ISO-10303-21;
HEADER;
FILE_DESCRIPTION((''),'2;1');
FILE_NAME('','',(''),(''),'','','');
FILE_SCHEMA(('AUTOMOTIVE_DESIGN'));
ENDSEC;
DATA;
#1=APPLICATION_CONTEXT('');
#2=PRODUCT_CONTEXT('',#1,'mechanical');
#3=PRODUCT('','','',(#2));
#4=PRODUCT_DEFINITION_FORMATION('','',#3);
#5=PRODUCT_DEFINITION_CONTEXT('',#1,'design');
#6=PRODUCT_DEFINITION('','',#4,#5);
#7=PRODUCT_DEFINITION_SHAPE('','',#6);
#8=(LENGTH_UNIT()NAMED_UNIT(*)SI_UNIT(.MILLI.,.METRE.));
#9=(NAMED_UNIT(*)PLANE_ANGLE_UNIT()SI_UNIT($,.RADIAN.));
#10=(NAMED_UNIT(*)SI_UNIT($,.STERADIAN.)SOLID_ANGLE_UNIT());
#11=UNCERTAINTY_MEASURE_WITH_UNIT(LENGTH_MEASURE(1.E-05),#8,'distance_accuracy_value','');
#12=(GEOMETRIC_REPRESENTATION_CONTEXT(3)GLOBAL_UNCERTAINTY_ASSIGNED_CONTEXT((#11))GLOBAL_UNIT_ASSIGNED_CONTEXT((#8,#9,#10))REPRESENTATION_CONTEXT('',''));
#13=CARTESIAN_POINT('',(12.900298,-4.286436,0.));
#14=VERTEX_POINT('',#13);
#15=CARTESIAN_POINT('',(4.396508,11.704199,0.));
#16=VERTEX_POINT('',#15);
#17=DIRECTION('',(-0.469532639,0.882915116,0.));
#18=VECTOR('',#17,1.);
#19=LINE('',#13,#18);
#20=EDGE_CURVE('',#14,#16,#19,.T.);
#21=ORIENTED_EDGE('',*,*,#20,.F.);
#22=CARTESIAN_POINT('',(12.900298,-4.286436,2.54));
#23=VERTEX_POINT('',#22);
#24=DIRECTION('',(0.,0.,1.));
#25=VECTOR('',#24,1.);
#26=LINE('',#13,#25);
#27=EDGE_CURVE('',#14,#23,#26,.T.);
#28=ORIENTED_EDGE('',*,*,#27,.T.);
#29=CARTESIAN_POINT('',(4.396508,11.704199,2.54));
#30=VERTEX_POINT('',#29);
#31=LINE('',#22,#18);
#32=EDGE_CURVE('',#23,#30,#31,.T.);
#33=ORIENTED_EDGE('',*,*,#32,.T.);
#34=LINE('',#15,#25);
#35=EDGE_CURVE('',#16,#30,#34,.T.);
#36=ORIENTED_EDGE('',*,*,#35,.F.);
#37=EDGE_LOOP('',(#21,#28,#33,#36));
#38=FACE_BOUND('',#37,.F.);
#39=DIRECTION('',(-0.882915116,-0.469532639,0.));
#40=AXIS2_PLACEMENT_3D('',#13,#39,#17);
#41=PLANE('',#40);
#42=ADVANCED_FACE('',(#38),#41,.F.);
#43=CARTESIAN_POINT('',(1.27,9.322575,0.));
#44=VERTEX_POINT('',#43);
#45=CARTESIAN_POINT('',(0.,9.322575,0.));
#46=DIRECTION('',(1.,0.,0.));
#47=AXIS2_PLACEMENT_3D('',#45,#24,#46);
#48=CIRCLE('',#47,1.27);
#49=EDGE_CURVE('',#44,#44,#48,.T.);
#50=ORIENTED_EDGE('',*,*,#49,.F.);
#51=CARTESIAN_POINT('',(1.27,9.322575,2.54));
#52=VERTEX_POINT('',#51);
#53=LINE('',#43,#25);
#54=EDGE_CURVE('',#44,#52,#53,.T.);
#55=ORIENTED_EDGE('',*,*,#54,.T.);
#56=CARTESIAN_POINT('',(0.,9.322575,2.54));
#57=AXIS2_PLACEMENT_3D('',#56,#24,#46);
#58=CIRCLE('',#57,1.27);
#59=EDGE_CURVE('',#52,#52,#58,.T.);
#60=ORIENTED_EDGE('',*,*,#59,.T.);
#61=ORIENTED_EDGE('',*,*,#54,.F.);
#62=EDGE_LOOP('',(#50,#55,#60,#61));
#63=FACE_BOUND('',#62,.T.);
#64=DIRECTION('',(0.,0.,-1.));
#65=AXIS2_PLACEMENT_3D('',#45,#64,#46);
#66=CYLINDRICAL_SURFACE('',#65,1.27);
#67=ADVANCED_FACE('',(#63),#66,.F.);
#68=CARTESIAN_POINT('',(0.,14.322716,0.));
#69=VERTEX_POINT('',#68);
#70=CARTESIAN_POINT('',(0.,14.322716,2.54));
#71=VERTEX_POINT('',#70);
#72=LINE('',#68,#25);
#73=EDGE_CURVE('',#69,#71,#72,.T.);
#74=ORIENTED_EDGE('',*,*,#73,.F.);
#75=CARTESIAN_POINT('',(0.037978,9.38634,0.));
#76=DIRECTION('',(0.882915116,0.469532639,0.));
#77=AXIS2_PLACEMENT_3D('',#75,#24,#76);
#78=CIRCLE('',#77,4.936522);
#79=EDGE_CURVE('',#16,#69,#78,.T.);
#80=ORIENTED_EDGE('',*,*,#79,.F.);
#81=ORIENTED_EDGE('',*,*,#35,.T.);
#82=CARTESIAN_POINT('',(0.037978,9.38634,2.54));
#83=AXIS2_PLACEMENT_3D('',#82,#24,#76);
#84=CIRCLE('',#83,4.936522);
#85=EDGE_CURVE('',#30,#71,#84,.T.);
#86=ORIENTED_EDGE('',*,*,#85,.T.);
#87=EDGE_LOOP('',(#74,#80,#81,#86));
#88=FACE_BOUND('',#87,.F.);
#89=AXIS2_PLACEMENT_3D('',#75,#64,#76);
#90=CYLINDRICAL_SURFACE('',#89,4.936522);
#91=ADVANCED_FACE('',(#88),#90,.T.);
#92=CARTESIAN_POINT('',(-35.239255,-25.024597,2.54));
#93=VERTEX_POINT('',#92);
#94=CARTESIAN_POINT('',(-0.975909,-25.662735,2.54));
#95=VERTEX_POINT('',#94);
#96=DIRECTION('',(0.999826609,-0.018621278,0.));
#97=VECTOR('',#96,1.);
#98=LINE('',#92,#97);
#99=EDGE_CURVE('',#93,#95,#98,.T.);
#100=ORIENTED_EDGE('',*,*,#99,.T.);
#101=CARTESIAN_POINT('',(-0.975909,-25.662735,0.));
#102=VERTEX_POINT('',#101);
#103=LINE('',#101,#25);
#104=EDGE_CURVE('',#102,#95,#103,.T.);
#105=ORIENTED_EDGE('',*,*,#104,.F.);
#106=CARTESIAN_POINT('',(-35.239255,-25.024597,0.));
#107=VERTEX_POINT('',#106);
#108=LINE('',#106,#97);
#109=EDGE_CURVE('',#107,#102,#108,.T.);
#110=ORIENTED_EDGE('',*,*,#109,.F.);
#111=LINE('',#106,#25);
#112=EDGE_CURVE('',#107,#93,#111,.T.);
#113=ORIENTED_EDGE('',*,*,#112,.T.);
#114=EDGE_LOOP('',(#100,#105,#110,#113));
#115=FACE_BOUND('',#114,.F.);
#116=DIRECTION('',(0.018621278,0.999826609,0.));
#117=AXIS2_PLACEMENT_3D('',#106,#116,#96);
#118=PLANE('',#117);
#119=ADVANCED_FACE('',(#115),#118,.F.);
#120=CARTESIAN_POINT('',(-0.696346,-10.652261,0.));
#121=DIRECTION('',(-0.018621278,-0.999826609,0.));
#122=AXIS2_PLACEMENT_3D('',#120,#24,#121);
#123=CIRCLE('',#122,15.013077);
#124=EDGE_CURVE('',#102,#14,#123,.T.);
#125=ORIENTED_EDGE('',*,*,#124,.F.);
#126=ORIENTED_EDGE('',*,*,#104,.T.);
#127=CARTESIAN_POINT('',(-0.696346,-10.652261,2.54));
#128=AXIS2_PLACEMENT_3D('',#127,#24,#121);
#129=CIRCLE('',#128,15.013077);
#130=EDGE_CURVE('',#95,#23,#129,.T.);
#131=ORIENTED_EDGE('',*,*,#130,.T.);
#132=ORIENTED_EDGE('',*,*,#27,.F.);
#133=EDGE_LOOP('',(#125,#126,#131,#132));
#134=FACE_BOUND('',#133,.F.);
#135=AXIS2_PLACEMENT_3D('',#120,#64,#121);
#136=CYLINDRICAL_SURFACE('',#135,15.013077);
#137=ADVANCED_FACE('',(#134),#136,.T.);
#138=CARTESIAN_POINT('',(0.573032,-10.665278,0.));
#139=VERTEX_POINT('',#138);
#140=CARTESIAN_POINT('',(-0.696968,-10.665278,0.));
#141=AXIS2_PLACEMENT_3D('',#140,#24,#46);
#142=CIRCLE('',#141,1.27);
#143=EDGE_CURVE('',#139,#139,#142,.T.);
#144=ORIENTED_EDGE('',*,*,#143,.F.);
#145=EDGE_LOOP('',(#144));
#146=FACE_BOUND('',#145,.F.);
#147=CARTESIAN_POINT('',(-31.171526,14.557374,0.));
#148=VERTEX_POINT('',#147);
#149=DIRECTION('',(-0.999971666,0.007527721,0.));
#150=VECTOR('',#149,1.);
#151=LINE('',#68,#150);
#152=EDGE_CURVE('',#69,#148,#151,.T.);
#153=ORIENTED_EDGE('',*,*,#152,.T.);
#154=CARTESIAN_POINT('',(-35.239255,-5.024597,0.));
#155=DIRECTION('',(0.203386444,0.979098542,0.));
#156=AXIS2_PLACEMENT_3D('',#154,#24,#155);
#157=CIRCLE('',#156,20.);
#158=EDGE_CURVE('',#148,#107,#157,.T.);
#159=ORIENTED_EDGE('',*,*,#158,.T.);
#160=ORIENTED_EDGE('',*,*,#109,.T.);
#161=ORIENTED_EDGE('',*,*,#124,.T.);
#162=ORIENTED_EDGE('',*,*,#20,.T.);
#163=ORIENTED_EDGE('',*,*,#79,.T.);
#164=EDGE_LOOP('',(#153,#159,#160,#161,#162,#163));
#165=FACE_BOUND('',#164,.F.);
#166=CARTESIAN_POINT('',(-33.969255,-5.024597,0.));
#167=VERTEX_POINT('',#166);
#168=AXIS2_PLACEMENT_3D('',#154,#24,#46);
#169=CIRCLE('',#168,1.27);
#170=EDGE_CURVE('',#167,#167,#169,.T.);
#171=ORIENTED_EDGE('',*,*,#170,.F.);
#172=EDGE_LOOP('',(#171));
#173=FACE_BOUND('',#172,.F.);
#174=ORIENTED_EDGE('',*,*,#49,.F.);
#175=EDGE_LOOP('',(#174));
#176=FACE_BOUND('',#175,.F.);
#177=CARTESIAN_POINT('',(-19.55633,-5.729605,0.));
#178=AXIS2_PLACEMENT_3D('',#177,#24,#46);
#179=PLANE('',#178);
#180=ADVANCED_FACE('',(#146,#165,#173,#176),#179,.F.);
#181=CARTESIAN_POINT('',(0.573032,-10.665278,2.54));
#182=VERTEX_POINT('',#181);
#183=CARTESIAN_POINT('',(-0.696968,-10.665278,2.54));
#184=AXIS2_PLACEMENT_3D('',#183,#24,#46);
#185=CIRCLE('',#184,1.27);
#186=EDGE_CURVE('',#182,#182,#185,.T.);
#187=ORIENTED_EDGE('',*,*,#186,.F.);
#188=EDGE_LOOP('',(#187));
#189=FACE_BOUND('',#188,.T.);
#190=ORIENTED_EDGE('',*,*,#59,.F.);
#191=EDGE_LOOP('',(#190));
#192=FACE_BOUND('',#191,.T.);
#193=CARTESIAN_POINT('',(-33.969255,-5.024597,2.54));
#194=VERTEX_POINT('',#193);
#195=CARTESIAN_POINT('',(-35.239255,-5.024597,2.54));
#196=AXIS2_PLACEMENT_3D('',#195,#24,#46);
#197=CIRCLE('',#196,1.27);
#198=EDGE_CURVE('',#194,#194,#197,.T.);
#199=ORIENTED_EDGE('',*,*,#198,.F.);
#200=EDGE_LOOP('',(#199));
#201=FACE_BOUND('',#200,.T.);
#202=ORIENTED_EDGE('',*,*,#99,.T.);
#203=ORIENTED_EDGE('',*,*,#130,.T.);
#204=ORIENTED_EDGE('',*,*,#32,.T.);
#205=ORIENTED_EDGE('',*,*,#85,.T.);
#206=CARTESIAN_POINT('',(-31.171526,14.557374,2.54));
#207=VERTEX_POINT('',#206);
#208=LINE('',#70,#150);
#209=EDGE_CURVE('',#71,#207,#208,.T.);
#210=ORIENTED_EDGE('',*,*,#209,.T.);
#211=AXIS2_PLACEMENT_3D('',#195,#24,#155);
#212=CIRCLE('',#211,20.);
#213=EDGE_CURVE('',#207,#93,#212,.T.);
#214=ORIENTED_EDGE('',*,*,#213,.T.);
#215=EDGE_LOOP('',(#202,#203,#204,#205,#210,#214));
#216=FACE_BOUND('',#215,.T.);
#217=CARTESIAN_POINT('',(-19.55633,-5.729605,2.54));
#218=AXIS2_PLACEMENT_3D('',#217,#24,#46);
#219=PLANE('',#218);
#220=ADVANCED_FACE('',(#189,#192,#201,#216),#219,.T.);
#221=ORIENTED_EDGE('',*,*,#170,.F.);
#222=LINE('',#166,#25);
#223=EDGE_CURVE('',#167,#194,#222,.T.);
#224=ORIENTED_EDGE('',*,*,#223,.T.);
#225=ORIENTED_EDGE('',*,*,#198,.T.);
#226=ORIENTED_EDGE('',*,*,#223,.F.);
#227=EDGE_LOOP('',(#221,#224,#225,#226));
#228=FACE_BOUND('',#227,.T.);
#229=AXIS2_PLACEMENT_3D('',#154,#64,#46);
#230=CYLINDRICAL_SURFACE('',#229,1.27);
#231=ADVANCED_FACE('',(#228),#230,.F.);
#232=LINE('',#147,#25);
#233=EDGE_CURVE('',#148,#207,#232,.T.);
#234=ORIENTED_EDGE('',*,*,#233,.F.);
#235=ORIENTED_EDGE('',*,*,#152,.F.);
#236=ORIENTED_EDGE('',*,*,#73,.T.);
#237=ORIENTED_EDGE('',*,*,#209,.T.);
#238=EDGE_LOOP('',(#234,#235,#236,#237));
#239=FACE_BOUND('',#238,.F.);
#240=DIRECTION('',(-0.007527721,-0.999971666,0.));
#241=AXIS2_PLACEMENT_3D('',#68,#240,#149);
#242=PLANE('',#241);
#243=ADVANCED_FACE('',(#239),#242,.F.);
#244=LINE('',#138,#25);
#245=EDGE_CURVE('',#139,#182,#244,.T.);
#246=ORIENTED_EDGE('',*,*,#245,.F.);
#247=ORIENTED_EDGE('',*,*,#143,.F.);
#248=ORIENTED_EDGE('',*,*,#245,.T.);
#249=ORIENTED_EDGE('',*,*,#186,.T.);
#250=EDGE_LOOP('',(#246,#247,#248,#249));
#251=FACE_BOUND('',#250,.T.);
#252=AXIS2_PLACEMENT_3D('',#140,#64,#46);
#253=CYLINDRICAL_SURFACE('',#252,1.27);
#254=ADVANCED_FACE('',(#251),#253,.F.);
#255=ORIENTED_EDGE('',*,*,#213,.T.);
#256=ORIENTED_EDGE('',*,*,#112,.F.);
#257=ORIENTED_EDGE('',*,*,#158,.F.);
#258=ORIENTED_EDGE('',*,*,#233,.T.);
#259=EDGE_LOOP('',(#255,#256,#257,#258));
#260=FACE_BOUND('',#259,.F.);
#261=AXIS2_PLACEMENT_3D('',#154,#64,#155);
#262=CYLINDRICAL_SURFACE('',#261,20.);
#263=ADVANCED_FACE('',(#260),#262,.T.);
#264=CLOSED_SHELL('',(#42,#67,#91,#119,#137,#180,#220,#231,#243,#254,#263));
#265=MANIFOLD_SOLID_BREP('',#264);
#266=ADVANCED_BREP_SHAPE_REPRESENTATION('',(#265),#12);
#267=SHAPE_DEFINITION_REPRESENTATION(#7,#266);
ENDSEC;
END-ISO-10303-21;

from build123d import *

# Parameters (mm, degrees)
F0_R     = 1.27
F1_DEPTH = 2.54


# Not quite as in the source:
# - a feature names something its author has since deleted; it is built from what else it names


with BuildPart() as f1:
    # F0 (on Top) → F1 (new body)
    with BuildSketch(Plane.XY):
        with BuildLine():
            Line((0, 14.3227163851), (-31.1715259044, 14.5573735897))
            ThreePointArc((-31.1715259044, 14.5573735897), (-55.1344730062, -2.9800210938), (-35.2392547778, -25.0245972461))
            Line((-35.2392547778, -25.0245972461), (-0.9759091536, -25.6627351613))
            ThreePointArc((-0.9759091536, -25.6627351613), (11.8962192038, -18.8265973986), (12.900298337, -4.2864360152))
            Line((12.900298337, -4.2864360152), (4.3965081654, 11.7041986386))
            ThreePointArc((4.3965081654, 11.7041986386), (2.5640325727, 13.627601953), (0, 14.3227163851))
        make_face()
        with Locations((-0.696967661, -10.6652775001)):
            Circle(F0_R, mode=Mode.SUBTRACT)
        with Locations((-35.2392547778, -5.0245972461)):
            Circle(F0_R, mode=Mode.SUBTRACT)
        with Locations((0, 9.3225747127)):
            Circle(F0_R, mode=Mode.SUBTRACT)
    extrude(amount=F1_DEPTH)


solid = f1.part
